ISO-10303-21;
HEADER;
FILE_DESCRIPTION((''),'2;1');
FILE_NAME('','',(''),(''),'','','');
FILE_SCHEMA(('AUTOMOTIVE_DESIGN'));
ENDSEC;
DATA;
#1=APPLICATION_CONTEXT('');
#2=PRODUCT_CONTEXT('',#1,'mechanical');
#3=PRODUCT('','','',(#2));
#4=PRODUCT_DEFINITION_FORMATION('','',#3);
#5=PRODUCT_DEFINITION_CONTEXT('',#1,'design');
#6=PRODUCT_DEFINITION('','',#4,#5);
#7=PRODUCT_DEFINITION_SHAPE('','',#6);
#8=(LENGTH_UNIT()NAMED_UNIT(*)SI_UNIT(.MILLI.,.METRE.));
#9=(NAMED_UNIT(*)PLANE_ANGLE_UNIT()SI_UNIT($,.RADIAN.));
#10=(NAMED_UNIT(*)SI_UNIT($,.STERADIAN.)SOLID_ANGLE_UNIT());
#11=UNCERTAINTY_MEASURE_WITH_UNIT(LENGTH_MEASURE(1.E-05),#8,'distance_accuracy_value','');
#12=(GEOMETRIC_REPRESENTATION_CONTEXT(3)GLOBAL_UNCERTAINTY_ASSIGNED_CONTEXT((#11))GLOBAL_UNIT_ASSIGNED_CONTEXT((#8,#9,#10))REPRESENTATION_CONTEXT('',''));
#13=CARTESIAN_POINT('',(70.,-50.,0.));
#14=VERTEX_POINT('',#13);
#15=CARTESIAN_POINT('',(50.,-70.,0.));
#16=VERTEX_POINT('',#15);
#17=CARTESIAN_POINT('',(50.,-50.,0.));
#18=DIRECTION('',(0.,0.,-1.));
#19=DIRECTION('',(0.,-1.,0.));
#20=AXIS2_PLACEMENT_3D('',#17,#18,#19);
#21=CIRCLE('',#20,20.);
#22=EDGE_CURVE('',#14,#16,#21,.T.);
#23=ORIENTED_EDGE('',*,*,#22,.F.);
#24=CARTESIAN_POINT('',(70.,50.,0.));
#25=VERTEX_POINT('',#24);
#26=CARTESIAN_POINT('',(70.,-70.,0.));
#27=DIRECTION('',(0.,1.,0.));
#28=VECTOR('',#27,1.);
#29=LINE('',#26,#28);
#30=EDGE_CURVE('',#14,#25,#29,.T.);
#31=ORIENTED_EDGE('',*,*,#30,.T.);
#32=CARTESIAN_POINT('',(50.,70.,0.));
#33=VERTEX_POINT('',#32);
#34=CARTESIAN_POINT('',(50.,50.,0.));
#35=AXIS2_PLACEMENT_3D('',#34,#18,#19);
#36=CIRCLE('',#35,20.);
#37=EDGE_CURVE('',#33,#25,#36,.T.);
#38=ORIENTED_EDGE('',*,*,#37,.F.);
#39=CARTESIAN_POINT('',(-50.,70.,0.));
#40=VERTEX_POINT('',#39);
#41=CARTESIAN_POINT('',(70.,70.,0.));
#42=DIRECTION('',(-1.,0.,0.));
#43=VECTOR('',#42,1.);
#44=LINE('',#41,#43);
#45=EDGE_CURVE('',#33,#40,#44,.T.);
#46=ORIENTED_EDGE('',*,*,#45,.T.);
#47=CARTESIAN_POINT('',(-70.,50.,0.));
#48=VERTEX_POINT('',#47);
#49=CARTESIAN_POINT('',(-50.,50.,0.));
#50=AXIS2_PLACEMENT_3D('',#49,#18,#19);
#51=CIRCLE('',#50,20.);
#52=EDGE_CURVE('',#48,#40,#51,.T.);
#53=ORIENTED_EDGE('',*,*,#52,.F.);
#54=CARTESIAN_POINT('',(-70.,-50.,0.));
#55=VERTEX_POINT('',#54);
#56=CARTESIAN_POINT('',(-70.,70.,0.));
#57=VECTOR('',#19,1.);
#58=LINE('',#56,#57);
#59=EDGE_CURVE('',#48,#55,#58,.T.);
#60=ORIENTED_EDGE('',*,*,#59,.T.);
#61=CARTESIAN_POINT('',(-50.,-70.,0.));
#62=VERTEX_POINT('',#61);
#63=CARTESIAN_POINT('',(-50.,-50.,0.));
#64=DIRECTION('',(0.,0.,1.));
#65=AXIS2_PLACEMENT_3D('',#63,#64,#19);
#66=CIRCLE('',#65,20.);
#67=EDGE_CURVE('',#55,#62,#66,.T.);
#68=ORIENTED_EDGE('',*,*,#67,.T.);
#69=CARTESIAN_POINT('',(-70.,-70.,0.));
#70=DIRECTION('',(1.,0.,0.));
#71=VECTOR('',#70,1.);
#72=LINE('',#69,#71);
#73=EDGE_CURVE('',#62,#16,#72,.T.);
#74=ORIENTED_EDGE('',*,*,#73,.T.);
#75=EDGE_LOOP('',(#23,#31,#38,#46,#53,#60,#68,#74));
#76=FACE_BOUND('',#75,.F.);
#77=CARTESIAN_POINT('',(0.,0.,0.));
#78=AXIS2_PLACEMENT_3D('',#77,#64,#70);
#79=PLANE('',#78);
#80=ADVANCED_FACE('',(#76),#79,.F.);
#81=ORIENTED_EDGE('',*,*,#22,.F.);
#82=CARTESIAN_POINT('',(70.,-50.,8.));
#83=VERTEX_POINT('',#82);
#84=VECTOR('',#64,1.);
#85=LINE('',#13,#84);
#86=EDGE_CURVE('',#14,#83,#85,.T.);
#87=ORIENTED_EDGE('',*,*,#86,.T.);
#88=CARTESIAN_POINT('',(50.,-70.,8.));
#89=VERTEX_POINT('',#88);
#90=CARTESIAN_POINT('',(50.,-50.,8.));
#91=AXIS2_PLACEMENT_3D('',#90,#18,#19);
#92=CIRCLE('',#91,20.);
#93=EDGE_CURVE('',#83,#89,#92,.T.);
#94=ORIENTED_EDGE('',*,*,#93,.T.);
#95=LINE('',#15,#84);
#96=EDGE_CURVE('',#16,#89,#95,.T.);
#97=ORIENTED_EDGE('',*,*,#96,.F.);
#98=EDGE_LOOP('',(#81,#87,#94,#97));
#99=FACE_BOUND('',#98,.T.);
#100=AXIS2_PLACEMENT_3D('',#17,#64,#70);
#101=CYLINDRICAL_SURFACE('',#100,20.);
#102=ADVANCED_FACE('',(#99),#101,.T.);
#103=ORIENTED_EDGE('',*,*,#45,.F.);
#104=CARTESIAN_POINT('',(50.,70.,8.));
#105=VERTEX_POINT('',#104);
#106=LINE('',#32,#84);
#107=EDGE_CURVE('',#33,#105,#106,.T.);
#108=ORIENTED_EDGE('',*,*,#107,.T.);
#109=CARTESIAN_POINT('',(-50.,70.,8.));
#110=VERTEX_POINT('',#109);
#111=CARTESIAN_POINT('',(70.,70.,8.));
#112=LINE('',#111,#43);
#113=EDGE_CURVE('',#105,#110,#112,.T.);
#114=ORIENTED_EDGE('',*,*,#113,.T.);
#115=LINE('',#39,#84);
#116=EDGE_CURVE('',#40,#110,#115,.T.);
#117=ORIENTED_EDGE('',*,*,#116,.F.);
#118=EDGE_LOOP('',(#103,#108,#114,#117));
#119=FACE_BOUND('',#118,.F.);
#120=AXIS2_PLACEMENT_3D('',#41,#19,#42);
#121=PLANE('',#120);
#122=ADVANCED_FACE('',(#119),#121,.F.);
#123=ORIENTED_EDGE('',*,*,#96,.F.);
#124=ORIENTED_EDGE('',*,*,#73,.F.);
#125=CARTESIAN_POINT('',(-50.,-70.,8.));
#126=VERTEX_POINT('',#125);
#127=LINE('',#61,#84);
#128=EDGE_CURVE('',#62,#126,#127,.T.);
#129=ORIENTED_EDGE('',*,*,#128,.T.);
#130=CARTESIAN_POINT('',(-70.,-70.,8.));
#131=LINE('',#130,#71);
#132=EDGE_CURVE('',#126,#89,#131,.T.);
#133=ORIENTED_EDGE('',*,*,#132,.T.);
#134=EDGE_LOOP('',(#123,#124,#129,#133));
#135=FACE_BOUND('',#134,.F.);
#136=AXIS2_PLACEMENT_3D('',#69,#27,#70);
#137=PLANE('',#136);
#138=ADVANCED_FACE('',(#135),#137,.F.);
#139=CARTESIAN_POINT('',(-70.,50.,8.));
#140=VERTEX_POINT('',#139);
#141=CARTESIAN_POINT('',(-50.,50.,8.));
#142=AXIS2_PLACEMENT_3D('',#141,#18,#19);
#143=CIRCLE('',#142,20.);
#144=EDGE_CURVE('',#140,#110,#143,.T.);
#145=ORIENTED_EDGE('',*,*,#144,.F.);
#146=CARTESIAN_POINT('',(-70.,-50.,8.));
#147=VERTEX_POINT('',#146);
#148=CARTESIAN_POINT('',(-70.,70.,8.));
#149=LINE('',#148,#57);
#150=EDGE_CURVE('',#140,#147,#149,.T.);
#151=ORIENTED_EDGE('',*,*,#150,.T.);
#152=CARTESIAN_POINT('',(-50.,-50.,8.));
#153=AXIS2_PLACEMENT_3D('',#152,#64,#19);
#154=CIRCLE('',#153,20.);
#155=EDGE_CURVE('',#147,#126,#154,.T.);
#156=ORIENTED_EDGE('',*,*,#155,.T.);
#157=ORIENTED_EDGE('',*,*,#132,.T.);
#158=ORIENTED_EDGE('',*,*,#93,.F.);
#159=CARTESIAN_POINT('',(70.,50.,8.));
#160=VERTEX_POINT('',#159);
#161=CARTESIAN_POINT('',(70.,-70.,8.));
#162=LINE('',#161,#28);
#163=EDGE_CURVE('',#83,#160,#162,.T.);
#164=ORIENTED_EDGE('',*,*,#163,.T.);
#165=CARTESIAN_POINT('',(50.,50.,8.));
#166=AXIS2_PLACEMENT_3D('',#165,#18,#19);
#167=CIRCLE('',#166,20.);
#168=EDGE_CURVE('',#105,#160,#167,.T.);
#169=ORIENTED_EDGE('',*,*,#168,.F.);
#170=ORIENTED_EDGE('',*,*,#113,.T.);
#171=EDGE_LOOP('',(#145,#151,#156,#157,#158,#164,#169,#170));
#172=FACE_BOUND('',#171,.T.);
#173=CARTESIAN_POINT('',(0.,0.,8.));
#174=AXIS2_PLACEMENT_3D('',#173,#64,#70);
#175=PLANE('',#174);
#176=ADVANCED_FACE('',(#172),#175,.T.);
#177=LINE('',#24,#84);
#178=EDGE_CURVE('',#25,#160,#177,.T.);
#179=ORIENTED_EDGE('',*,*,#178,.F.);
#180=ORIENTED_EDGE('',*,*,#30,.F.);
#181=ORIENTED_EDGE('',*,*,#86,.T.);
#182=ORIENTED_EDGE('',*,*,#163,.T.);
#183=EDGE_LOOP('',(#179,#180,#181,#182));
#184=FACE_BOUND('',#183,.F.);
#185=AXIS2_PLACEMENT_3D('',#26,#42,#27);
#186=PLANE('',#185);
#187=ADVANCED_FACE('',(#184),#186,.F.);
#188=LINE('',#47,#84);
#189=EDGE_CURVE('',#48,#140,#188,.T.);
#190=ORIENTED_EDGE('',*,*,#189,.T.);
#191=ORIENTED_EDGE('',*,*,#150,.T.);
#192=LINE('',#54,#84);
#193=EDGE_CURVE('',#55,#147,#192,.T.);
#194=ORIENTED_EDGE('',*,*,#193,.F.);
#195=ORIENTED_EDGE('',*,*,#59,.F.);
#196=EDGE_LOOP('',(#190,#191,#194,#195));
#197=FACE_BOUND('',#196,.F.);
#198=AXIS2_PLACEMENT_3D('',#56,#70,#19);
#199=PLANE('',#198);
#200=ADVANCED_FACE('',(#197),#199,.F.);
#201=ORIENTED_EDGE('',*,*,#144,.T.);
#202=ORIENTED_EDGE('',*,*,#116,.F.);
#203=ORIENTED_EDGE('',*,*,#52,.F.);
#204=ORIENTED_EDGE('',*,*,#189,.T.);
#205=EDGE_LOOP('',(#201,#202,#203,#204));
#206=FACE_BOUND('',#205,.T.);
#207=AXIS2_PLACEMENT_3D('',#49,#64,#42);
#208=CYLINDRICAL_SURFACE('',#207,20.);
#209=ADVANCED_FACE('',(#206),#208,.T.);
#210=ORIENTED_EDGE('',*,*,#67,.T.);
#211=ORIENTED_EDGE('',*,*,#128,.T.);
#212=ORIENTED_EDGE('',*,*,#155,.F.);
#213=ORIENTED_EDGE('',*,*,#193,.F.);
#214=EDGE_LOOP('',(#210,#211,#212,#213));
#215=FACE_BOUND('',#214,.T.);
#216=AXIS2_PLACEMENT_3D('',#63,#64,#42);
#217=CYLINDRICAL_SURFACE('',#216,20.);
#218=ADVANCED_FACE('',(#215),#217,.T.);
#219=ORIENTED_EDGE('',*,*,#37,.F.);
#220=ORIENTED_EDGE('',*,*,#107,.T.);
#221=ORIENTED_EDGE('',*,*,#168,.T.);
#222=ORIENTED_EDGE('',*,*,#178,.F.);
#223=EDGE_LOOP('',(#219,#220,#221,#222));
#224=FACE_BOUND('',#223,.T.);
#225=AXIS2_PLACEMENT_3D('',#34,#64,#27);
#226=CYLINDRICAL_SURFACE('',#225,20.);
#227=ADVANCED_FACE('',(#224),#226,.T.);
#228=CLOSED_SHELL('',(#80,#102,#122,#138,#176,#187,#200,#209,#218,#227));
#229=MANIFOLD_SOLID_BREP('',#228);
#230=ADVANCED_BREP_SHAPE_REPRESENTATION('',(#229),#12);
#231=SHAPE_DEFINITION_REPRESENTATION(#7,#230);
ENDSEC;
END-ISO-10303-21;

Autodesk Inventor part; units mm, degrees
ref_plane "YZ Plane" through (0, 0, 0) normal (1, 0, 0) x (0, 1, 0)
ref_plane "XZ Plane" through (0, 0, 0) normal (0, 1, 0) x (-1, 0, 0)
ref_plane "XY Plane" through (0, 0, 0) normal (0, 0, 1) x (1, 0, 0)
sketch "Sketch1" plane through (0, 0, 0) normal (0, 0, 1) x (1, 0, 0)
  line L0 (-70, -70) -> (70, -70)
  line L1 (70, -70) -> (70, 70)
  line L2 (70, 70) -> (-70, 70)
  line L3 (-70, 70) -> (-70, -70)
  line L4 (-70, -70) -> (70, 70) construction
  line L5 (70, -70) -> (-70, 70) construction
  point P0 (0, 0)
  dimension "d0" = 140
  dimension "d1" = 140
extrude "Plate1" add sketch "Sketch1" along normal blind 8
fillet "Corner Round1" radius 20 4 edges at (70, -70, 4) (-70, -70, 4) (-70, 70, 4) (70, 70, 4)
equation "\"d0\" = d1"
equation "\"d2\" = Thickness"
equation "\"BendReliefWidth\" = Thickness"
equation "\"BendReliefDepth\" = 0.5 * Thickness"
equation "\"CornerReliefSize\" = 4 * Thickness"
equation "\"MinimumRemnant\" = 2 * Thickness"
equation "\"TransitionRadius\" = BendRadius"
equation "\"JacobiRadiusSize\" = BendRadius"
equation "\"GapSize\" = Thickness"
equation "\"Thickness\" = 8"
equation "\"BendRadius\" = 5"
properties part number "PNS 1782 leg plate for filter" material "Steel"
